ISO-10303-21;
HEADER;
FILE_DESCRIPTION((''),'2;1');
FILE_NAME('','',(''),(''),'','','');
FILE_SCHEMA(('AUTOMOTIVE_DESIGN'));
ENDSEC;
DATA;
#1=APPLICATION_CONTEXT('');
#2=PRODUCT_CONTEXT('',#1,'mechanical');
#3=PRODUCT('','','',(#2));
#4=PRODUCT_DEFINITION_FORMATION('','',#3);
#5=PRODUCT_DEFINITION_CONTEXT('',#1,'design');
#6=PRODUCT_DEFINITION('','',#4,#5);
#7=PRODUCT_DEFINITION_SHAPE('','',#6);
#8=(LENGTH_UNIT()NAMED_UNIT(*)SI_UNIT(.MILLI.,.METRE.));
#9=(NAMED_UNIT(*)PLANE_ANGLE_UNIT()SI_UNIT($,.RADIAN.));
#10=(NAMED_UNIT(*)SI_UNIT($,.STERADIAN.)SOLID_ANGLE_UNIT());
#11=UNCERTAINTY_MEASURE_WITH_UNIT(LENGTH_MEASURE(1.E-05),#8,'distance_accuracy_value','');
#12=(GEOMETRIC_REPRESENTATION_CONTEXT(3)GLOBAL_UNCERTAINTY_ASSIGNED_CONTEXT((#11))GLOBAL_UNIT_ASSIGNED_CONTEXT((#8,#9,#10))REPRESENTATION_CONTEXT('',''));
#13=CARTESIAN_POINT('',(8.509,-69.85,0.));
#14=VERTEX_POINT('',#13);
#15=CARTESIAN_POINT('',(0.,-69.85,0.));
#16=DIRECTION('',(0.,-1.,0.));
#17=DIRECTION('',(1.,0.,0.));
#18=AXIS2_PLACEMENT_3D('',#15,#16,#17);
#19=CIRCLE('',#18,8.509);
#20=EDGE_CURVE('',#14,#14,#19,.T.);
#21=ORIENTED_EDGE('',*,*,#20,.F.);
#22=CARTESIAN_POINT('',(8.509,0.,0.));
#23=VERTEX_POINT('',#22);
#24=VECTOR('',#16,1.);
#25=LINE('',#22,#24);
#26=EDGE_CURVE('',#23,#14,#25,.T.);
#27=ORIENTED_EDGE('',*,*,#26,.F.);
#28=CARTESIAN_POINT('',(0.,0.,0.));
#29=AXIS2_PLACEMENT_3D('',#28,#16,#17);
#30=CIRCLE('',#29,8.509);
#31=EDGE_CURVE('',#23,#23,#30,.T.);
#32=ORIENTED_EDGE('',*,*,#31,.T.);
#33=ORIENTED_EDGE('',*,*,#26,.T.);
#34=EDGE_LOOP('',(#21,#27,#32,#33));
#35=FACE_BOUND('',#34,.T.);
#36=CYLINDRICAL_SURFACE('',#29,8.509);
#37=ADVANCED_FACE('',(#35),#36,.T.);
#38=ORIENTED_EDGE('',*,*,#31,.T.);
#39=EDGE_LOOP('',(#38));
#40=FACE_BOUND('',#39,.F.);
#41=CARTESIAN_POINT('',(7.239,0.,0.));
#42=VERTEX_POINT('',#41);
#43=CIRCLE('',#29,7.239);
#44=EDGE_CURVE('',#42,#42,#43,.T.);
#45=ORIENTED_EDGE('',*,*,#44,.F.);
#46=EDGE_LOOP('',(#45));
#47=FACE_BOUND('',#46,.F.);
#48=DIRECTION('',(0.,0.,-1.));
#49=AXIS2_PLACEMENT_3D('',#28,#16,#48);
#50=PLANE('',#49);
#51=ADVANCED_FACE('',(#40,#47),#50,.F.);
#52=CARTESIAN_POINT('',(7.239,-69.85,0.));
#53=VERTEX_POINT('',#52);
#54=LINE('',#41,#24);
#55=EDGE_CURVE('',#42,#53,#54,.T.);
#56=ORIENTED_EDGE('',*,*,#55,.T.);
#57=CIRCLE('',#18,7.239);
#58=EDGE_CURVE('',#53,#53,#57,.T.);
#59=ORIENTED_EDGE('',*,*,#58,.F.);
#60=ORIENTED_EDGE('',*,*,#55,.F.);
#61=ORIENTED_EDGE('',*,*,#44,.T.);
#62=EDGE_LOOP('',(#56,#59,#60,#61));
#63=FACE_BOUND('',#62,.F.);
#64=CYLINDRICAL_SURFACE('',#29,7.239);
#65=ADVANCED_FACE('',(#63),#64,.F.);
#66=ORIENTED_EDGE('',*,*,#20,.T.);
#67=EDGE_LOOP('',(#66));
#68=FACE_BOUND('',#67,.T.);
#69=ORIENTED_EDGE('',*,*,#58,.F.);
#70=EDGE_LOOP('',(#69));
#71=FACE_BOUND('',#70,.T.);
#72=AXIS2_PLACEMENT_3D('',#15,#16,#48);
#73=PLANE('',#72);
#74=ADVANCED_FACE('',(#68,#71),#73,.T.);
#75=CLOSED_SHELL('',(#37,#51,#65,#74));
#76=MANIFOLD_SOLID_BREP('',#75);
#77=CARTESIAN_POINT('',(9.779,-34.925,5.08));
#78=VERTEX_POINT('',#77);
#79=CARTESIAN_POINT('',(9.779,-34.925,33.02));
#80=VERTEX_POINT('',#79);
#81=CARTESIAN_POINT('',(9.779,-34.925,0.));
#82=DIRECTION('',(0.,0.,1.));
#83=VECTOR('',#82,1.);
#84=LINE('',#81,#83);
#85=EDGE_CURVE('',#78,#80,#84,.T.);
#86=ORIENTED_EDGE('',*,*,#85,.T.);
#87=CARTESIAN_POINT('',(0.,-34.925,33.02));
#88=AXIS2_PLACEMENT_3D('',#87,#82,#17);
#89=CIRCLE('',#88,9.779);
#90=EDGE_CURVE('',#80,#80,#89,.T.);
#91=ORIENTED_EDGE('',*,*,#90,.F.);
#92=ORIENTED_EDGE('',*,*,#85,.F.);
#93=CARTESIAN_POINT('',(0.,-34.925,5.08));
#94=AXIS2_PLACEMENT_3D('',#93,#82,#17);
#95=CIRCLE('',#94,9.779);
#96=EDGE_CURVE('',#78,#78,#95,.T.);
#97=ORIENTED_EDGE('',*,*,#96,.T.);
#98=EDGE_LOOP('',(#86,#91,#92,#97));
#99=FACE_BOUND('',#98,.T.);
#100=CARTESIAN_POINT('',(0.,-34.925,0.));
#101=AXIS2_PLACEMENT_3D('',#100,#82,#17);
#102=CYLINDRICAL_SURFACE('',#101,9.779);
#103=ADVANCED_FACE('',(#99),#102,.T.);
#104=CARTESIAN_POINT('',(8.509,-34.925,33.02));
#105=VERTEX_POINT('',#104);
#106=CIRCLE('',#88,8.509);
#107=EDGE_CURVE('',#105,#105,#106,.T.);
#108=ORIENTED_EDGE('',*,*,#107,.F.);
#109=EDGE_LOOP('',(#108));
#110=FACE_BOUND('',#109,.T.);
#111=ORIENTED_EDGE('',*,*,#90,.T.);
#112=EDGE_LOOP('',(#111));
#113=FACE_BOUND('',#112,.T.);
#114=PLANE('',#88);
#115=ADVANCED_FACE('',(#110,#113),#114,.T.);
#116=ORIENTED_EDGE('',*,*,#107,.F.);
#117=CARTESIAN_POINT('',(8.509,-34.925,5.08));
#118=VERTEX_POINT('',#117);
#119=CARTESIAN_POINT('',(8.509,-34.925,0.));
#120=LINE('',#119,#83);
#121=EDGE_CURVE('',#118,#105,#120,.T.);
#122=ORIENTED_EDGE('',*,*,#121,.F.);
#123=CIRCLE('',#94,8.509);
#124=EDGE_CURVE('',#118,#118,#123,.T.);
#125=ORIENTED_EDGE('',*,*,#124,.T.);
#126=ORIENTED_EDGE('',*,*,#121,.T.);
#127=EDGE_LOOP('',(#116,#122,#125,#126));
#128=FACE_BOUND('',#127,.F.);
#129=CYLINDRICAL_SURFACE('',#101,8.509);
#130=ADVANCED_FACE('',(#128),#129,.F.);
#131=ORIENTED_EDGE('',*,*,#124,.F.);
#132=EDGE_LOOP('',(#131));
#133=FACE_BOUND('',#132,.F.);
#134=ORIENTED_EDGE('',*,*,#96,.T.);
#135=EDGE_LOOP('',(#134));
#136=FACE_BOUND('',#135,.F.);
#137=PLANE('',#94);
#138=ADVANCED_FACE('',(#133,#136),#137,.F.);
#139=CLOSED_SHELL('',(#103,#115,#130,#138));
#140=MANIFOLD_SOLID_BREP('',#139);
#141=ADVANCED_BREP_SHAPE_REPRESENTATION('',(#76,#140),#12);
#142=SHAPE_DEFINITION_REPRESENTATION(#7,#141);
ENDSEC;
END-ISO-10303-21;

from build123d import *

# Parameters (mm, degrees)
F0_R          = 8.509
F0_R_2        = 7.239
F3_R          = 9.779
F3_R_2        = 8.509
F6_DEPTH      = 20.828
F6_DEPTH_BACK = 5.08
F7_DEPTH      = 5.08


# Not quite as in the source:
# - a feature names something its author has since deleted; it is built from what else it names


with BuildPart() as f2:
    # F2: sweep along a path in F1
    with BuildLine(Plane.YZ) as f2_path:
        Line((0, 0), (-69.85, 0))
    # F0 (on Front) → F2 (sweep)
    with BuildSketch(Plane.XZ):
        Circle(F0_R)
        Circle(F0_R_2, mode=Mode.SUBTRACT)
    sweep(path=f2_path.line)


with BuildPart() as f5:
    # F5: sweep along a path in F4
    with BuildLine(Plane.YZ) as f5_path:
        Line((-34.925, 0), (-34.925, 38.1))
    # F3 (on Top) → F5 (sweep)
    with BuildSketch(Plane.XY):
        with Locations((0, -34.925)):
            Circle(F3_R)
        with Locations((0, -34.925)):
            Circle(F3_R_2, mode=Mode.SUBTRACT)
    sweep(path=f5_path.line)

    # F6 (cut, two sides): a face of the model
    f6_faces = [f5.faces().sort_by_distance(p)[0] for p in [
        (-9.5024081115, -34.925, 0),
    ]]
    extrude(f6_faces, amount=F6_DEPTH, mode=Mode.SUBTRACT)
    extrude(f6_faces, amount=-F6_DEPTH_BACK, mode=Mode.SUBTRACT)

    # F7 (cut): a face of the model
    f7_faces = [f5.faces().sort_by_distance(p)[0] for p in [
        (-9.5024081115, -34.925, 38.1),
    ]]
    extrude(f7_faces, amount=-F7_DEPTH, mode=Mode.SUBTRACT)


solid = Compound([f2.part, f5.part])
